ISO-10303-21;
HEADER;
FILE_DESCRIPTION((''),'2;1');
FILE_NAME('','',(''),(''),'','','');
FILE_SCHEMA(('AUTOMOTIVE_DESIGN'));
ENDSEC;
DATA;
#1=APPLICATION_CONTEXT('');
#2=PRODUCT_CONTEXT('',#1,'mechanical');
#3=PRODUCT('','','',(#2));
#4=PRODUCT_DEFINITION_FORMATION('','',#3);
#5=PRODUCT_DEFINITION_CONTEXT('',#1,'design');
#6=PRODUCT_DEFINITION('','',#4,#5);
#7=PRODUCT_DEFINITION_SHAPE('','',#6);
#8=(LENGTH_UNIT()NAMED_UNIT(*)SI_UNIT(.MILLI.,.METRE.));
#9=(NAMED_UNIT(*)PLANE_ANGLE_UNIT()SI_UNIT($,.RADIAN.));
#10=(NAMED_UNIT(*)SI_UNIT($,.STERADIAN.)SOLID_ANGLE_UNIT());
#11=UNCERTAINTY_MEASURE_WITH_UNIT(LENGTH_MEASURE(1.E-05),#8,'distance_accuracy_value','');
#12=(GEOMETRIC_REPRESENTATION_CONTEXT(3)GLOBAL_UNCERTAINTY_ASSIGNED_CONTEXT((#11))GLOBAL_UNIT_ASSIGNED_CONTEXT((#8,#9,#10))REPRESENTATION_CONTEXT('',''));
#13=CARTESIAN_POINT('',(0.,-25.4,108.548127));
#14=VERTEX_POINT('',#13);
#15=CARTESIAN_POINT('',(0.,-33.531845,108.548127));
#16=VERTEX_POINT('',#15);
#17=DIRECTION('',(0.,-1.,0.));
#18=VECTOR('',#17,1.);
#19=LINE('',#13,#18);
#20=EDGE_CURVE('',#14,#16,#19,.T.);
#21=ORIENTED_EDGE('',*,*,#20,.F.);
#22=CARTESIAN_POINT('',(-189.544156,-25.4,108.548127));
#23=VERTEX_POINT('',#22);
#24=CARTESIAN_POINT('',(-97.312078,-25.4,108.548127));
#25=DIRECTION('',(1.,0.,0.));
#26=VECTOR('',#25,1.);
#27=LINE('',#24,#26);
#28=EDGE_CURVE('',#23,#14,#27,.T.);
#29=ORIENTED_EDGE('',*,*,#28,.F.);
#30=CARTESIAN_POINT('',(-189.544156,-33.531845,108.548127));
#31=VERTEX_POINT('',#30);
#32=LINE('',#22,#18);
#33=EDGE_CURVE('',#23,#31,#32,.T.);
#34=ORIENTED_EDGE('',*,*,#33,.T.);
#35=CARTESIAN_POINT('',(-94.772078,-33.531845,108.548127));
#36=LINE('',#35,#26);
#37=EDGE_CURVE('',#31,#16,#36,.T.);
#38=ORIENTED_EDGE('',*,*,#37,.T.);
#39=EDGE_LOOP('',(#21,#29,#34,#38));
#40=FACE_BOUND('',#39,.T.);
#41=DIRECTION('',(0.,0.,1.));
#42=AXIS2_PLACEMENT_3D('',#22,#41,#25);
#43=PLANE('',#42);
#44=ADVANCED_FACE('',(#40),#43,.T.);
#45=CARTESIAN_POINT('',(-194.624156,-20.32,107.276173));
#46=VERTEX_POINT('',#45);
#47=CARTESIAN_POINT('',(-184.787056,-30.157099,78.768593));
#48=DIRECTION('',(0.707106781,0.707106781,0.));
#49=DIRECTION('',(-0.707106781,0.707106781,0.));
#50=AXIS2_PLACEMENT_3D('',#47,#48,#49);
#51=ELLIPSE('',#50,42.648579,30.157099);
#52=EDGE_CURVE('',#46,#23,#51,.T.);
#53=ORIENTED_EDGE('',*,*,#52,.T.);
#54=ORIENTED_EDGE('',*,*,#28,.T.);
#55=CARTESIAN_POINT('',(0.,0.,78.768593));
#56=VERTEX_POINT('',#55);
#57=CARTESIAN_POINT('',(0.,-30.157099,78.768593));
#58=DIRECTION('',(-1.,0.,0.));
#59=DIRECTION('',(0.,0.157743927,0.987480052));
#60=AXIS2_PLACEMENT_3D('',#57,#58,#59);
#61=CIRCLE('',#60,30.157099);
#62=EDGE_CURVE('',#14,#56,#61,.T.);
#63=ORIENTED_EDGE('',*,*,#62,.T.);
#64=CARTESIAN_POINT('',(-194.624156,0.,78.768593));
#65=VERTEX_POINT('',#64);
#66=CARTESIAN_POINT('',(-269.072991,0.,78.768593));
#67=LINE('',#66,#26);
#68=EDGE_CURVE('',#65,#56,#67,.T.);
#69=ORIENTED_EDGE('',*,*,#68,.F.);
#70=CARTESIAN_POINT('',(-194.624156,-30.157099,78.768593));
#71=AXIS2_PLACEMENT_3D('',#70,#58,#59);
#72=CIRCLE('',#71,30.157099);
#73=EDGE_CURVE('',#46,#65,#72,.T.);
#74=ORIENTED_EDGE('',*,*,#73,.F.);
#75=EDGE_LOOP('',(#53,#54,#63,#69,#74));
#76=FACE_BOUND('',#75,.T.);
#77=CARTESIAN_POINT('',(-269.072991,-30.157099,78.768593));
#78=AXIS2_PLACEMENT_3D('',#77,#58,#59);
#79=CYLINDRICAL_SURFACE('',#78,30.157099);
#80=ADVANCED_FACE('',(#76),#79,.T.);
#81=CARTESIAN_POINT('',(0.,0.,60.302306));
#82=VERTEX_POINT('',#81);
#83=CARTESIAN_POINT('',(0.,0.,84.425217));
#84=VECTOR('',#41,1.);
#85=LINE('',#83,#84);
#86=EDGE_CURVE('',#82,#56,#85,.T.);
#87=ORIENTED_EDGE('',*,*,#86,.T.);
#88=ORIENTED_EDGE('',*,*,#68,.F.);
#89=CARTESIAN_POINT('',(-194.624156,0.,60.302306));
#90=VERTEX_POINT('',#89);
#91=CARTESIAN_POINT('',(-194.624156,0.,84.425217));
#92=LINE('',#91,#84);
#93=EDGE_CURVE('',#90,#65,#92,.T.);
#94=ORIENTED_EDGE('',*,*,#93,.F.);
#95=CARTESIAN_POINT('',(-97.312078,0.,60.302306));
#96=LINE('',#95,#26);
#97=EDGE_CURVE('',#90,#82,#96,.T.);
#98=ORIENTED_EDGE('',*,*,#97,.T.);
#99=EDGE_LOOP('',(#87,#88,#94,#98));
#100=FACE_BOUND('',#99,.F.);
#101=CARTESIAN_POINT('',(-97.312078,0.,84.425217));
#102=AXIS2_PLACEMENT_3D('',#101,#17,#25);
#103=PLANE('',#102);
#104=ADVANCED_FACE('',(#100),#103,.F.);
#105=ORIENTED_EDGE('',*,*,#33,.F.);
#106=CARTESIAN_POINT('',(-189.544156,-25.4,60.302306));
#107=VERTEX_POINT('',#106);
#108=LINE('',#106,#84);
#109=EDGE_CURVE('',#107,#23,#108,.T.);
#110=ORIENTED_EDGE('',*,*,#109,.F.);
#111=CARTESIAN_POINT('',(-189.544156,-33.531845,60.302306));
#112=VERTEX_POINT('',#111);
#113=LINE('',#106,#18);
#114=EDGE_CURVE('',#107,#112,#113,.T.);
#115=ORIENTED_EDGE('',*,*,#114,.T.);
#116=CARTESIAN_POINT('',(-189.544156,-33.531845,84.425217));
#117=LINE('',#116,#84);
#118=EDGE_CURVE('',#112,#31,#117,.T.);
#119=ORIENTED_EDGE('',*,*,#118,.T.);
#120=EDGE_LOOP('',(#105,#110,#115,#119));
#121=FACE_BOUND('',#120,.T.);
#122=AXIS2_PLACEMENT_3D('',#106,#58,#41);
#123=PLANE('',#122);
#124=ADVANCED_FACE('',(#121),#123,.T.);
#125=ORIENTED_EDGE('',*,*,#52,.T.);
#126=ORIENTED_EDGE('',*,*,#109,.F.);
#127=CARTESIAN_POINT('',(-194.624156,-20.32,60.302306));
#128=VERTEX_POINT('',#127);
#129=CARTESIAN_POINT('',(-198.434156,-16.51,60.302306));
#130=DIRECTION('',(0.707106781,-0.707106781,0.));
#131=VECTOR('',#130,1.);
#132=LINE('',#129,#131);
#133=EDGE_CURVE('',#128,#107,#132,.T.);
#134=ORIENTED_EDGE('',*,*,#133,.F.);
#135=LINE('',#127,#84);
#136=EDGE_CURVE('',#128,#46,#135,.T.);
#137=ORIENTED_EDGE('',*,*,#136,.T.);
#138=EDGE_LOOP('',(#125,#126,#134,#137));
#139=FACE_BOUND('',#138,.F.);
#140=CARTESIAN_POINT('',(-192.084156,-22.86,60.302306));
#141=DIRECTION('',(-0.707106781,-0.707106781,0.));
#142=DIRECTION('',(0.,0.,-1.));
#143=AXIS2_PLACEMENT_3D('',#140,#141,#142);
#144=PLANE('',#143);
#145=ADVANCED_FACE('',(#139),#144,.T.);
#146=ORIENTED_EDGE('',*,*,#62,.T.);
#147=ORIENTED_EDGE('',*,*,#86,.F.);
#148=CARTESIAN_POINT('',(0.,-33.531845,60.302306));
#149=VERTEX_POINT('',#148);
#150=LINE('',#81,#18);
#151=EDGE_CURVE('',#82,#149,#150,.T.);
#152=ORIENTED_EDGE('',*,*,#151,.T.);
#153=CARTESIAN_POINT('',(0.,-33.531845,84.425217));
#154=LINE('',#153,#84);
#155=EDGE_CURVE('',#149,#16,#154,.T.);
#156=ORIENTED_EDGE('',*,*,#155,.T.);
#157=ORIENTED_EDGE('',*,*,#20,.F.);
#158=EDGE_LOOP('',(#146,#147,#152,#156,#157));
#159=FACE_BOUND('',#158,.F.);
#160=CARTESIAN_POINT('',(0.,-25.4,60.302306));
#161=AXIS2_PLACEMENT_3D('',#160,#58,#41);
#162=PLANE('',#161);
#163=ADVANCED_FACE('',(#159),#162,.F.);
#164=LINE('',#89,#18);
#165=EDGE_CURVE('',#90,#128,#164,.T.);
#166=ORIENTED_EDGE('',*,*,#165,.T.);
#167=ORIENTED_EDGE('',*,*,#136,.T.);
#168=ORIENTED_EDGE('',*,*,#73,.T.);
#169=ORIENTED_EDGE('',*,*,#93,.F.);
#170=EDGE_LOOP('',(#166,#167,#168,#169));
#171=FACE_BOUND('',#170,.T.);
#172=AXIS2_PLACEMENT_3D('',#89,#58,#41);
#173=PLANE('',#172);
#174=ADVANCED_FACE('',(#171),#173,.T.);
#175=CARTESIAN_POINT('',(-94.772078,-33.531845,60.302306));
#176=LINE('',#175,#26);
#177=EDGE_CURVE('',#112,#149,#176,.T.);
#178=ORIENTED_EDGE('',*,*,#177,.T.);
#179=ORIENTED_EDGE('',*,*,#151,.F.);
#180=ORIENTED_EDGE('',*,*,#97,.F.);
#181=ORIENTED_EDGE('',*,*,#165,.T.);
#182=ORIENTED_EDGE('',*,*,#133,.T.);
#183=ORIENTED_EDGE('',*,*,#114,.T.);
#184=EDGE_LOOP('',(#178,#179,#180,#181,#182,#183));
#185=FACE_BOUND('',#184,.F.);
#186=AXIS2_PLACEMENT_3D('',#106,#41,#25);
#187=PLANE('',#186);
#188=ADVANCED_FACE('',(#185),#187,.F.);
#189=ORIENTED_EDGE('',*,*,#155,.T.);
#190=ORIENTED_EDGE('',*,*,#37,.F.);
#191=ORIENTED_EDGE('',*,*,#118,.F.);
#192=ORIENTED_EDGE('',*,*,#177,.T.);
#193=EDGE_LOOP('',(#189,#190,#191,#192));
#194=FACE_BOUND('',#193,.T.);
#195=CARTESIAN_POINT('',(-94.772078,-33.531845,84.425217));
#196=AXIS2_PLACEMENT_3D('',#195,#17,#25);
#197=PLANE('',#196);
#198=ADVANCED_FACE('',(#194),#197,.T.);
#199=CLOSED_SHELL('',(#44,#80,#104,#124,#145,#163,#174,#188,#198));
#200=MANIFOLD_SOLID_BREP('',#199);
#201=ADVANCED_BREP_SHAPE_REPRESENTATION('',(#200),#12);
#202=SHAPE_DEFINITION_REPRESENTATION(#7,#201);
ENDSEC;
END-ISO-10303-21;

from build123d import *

# Parameters (mm, degrees)
F0_W        = 194.6241557598
F0_H        = 48.2458211482
F1_DEPTH    = 25.4
F2_T1_DEPTH = 343.5218255279
F3_SIZE     = 5.08
F4_W        = 189.5441557598
F4_H        = 48.2458211482
F5_DEPTH    = 8.1318449229


# Not quite as in the source:
# - a fillet or chamfer that OpenCascade refuses, or shapes differently, is made with other operations: its cross-section is extruded or revolved along the edge and cut away or added


with BuildPart() as f1:
    # F0 (on Front) → F1 (new body)
    with BuildSketch(Plane.XZ):
        with Locations((-97.3120778799, 84.4252165407)):
            Rectangle(F0_W, F0_H)
    extrude(amount=F1_DEPTH)

    # F2: fillet of radius 30.1570992617 on 1 edges, made by hand

    # F2_s2 → F2_t1 (cut)
    with BuildSketch(Plane.YZ.offset(-269.0729906439)):
        with BuildLine():
            ThreePointArc((-25.4, 108.5481271148), (-7.2124816956, 98.3388553113), (0, 78.7685931612))
            Line((0, 78.7685931612), (0, 108.5481271148))
            Line((0, 108.5481271148), (-25.4, 108.5481271148))
        make_face()
    extrude(amount=F2_T1_DEPTH, mode=Mode.SUBTRACT)

    # F3
    f3_edges = [f1.edges().sort_by_distance(p)[0] for p in [
        (-194.624156, -25.4, 84.425217),
    ]]
    chamfer(f3_edges, length=F3_SIZE)

    # F4 (on face) → F5 (join)
    with BuildSketch(Plane.XZ.offset(25.4)):
        with Locations((-94.7720778799, 84.4252165407)):
            Rectangle(F4_W, F4_H)
    extrude(amount=F5_DEPTH)


solid = f1.part
